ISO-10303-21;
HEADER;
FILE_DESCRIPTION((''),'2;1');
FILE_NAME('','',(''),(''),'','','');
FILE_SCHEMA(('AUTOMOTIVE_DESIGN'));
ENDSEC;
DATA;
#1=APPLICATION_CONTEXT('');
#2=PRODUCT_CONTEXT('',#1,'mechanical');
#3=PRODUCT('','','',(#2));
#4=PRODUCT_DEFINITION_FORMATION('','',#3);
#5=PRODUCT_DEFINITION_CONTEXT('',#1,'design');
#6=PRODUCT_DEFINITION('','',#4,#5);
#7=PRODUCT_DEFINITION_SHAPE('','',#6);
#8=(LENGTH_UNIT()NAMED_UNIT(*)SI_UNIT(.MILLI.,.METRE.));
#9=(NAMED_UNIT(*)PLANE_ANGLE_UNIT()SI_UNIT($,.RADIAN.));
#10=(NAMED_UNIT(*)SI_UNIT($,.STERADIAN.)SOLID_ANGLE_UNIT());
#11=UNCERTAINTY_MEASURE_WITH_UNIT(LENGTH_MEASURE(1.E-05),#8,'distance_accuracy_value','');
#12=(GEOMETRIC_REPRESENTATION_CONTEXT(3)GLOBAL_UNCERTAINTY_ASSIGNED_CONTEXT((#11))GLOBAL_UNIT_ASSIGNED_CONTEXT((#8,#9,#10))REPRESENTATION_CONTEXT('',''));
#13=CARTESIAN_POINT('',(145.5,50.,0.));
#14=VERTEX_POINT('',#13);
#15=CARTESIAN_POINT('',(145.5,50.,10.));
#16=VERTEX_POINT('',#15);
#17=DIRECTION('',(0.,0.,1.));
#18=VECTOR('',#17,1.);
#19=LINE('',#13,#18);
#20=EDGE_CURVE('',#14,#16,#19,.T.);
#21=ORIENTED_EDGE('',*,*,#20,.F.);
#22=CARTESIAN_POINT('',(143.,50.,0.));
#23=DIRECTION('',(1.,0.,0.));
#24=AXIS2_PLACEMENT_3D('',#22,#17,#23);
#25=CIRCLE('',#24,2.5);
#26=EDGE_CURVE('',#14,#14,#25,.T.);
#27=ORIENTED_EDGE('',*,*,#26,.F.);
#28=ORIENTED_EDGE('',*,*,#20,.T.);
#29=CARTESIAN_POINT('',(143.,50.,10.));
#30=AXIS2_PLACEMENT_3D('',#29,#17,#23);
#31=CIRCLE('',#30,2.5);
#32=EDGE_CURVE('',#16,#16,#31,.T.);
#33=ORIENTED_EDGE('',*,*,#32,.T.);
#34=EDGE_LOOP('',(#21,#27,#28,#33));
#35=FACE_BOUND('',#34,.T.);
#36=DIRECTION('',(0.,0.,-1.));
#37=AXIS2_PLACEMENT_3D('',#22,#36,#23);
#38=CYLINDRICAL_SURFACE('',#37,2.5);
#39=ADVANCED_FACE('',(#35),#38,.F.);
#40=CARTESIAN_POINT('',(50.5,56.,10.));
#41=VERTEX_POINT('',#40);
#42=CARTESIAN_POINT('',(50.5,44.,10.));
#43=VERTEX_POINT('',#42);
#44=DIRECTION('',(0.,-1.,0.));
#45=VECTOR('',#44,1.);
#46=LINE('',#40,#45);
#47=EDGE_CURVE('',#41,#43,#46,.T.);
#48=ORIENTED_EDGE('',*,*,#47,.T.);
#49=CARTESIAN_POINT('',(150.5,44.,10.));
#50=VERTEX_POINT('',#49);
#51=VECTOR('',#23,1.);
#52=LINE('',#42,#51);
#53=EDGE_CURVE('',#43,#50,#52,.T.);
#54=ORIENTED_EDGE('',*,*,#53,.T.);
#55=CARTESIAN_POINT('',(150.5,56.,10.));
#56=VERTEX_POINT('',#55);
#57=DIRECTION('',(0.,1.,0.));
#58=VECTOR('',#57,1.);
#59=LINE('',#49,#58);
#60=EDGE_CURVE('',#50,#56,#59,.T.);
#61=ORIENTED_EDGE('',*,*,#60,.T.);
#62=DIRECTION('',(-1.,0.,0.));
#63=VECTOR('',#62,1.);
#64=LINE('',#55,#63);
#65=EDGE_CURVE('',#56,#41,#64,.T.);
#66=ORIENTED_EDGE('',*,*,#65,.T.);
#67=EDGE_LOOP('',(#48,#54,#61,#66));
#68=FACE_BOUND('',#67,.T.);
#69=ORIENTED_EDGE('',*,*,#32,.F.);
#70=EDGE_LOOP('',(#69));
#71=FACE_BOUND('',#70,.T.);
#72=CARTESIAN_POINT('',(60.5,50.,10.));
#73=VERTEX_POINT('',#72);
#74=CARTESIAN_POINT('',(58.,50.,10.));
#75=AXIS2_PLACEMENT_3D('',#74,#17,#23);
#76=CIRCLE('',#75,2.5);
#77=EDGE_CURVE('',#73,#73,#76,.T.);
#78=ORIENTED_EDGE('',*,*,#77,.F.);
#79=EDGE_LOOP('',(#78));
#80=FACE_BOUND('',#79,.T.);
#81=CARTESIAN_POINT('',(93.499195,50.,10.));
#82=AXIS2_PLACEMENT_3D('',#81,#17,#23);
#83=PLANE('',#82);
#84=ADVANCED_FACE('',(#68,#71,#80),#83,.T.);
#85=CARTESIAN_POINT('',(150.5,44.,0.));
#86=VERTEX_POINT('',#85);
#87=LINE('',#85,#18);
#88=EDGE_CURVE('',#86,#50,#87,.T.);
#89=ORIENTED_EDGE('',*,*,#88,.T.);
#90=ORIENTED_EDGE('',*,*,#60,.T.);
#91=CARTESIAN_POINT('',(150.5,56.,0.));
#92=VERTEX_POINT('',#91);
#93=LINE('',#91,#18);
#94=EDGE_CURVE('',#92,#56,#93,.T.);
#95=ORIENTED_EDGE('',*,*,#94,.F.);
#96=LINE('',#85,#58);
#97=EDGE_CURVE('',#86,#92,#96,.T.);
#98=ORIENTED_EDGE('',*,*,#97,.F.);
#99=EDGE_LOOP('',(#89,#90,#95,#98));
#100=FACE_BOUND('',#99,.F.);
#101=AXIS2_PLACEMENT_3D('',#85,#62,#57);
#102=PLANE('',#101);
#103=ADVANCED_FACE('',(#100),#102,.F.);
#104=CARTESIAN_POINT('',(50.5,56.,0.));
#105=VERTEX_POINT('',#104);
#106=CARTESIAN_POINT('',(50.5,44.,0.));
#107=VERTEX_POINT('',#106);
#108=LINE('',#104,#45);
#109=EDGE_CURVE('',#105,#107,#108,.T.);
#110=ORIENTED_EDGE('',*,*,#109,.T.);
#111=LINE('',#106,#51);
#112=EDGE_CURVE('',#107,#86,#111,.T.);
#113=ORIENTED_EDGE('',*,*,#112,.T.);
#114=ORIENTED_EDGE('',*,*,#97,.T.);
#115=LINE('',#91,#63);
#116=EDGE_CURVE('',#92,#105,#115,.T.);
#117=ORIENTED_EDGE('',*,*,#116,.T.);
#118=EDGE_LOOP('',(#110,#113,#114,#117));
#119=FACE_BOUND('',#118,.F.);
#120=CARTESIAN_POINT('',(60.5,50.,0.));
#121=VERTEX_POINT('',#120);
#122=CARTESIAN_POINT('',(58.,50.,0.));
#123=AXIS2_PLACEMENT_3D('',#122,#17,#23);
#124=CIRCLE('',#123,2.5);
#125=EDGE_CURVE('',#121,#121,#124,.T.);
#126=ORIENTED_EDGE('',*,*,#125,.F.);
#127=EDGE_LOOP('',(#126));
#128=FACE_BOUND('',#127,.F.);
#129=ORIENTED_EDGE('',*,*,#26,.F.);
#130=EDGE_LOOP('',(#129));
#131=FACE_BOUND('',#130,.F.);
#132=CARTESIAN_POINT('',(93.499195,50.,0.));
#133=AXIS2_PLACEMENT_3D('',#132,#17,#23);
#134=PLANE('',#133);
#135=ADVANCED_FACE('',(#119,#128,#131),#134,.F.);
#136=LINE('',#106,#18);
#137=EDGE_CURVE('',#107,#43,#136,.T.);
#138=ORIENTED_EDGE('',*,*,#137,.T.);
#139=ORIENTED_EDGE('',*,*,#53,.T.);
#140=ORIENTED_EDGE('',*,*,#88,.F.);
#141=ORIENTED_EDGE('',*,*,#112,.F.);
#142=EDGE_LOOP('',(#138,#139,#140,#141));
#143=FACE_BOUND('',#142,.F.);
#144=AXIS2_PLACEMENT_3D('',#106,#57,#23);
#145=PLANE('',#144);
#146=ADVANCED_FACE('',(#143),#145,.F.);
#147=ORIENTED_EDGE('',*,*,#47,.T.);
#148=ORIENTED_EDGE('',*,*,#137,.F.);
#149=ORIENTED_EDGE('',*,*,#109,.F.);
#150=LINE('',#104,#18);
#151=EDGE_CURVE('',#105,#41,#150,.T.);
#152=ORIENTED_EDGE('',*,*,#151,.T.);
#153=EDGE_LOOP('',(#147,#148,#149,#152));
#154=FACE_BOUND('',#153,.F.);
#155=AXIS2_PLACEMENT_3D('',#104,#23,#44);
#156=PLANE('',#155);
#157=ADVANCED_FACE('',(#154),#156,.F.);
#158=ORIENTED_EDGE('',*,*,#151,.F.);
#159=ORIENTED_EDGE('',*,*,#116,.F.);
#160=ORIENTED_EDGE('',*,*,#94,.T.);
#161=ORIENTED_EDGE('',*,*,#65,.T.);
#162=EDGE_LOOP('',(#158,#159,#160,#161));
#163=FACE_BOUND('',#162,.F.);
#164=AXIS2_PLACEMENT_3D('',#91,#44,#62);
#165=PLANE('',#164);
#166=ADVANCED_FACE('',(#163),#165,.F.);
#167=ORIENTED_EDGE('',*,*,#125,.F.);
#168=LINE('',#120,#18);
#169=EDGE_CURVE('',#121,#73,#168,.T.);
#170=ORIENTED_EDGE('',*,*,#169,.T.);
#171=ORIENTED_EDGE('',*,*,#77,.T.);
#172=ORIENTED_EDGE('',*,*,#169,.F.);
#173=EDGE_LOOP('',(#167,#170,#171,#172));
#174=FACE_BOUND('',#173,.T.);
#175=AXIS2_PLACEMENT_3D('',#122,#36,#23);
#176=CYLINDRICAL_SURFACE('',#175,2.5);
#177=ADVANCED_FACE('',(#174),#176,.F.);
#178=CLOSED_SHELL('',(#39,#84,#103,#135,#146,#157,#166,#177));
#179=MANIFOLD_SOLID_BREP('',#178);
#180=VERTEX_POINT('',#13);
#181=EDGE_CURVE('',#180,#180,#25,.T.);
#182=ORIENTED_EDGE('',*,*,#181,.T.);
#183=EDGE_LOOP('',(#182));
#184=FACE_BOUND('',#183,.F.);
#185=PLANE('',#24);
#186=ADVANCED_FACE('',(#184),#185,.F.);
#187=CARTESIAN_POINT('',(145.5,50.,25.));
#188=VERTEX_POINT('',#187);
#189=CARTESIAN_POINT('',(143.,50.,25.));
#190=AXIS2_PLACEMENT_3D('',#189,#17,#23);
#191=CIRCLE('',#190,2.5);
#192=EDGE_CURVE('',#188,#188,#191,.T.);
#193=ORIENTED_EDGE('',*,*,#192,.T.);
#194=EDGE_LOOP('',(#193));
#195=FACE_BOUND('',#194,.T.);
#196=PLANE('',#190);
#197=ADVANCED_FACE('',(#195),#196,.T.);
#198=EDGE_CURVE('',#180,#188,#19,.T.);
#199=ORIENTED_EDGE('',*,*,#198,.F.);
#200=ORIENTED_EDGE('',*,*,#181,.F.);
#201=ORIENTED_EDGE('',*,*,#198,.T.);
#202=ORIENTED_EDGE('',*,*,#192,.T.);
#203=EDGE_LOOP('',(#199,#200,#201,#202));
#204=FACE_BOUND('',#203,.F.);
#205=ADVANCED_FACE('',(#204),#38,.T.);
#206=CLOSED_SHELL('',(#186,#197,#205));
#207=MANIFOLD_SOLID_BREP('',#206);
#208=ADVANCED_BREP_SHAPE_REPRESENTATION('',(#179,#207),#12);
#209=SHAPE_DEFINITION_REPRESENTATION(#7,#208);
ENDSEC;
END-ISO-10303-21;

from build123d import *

# Parameters (mm, degrees)
F0_R     = 4
F0_R_2   = 2.5
F1_DEPTH = 10
F2_DEPTH = 25


with BuildPart() as f1:
    # F0 (on Top) → F1 (new body)
    with BuildSketch(Plane.XY):
        with BuildLine():
            ThreePointArc((113.5607177772, 44), (112.5, 50), (113.5607177772, 56))
            Line((113.5607177772, 56), (73.5, 56))
            Line((73.5, 56), (73.5, 44))
            Line((73.5, 44), (113.5607177772, 44))
        make_face()
        with BuildLine():
            ThreePointArc((146.4392822228, 44), (147.2327803749, 46.9534805842), (147.5, 50))
            ThreePointArc((147.5, 50), (147.2327803749, 53.0465194158), (146.4392822228, 56))
            Line((146.4392822228, 56), (113.5607177772, 56))
            ThreePointArc((113.5607177772, 56), (112.5, 50), (113.5607177772, 44))
            Line((113.5607177772, 44), (146.4392822228, 44))
        make_face()
        with Locations((130, 50)):
            Circle(F0_R, mode=Mode.SUBTRACT)
        with Locations((143, 50)):
            Circle(F0_R_2, mode=Mode.SUBTRACT)
        with BuildLine():
            Line((73.5, 44), (73.5, 56))
            Line((73.5, 56), (50.5, 56))
            Line((50.5, 56), (50.5, 52.1794494718))
            ThreePointArc((50.5, 52.1794494718), (50.8733971724, 51.1180339887), (51, 50))
            ThreePointArc((51, 50), (50.8733971724, 48.8819660113), (50.5, 47.8205505282))
            Line((50.5, 47.8205505282), (50.5, 44))
            Line((50.5, 44), (73.5, 44))
        make_face()
        with Locations((58, 50)):
            Circle(F0_R_2, mode=Mode.SUBTRACT)
        with Locations((130, 50)):
            Circle(F0_R)
        with BuildLine():
            ThreePointArc((146.4392822228, 56), (147.2327803749, 53.0465194158), (147.5, 50))
            ThreePointArc((147.5, 50), (147.2327803749, 46.9534805842), (146.4392822228, 44))
            Line((146.4392822228, 44), (150.5, 44))
            Line((150.5, 44), (150.5, 56))
            Line((150.5, 56), (146.4392822228, 56))
        make_face()
        with BuildLine():
            ThreePointArc((51, 50), (50.8733971724, 51.1180339887), (50.5, 52.1794494718))
            Line((50.5, 52.1794494718), (50.5, 47.8205505282))
            ThreePointArc((50.5, 47.8205505282), (50.8733971724, 48.8819660113), (51, 50))
        make_face()
    extrude(amount=F1_DEPTH)


with BuildPart() as f2:
    # F0 (on Top) → F2 (new body)
    with BuildSketch(Plane.XY):
        with Locations((143, 50)):
            Circle(F0_R_2)
    extrude(amount=F2_DEPTH)


solid = Compound([f1.part, f2.part])
